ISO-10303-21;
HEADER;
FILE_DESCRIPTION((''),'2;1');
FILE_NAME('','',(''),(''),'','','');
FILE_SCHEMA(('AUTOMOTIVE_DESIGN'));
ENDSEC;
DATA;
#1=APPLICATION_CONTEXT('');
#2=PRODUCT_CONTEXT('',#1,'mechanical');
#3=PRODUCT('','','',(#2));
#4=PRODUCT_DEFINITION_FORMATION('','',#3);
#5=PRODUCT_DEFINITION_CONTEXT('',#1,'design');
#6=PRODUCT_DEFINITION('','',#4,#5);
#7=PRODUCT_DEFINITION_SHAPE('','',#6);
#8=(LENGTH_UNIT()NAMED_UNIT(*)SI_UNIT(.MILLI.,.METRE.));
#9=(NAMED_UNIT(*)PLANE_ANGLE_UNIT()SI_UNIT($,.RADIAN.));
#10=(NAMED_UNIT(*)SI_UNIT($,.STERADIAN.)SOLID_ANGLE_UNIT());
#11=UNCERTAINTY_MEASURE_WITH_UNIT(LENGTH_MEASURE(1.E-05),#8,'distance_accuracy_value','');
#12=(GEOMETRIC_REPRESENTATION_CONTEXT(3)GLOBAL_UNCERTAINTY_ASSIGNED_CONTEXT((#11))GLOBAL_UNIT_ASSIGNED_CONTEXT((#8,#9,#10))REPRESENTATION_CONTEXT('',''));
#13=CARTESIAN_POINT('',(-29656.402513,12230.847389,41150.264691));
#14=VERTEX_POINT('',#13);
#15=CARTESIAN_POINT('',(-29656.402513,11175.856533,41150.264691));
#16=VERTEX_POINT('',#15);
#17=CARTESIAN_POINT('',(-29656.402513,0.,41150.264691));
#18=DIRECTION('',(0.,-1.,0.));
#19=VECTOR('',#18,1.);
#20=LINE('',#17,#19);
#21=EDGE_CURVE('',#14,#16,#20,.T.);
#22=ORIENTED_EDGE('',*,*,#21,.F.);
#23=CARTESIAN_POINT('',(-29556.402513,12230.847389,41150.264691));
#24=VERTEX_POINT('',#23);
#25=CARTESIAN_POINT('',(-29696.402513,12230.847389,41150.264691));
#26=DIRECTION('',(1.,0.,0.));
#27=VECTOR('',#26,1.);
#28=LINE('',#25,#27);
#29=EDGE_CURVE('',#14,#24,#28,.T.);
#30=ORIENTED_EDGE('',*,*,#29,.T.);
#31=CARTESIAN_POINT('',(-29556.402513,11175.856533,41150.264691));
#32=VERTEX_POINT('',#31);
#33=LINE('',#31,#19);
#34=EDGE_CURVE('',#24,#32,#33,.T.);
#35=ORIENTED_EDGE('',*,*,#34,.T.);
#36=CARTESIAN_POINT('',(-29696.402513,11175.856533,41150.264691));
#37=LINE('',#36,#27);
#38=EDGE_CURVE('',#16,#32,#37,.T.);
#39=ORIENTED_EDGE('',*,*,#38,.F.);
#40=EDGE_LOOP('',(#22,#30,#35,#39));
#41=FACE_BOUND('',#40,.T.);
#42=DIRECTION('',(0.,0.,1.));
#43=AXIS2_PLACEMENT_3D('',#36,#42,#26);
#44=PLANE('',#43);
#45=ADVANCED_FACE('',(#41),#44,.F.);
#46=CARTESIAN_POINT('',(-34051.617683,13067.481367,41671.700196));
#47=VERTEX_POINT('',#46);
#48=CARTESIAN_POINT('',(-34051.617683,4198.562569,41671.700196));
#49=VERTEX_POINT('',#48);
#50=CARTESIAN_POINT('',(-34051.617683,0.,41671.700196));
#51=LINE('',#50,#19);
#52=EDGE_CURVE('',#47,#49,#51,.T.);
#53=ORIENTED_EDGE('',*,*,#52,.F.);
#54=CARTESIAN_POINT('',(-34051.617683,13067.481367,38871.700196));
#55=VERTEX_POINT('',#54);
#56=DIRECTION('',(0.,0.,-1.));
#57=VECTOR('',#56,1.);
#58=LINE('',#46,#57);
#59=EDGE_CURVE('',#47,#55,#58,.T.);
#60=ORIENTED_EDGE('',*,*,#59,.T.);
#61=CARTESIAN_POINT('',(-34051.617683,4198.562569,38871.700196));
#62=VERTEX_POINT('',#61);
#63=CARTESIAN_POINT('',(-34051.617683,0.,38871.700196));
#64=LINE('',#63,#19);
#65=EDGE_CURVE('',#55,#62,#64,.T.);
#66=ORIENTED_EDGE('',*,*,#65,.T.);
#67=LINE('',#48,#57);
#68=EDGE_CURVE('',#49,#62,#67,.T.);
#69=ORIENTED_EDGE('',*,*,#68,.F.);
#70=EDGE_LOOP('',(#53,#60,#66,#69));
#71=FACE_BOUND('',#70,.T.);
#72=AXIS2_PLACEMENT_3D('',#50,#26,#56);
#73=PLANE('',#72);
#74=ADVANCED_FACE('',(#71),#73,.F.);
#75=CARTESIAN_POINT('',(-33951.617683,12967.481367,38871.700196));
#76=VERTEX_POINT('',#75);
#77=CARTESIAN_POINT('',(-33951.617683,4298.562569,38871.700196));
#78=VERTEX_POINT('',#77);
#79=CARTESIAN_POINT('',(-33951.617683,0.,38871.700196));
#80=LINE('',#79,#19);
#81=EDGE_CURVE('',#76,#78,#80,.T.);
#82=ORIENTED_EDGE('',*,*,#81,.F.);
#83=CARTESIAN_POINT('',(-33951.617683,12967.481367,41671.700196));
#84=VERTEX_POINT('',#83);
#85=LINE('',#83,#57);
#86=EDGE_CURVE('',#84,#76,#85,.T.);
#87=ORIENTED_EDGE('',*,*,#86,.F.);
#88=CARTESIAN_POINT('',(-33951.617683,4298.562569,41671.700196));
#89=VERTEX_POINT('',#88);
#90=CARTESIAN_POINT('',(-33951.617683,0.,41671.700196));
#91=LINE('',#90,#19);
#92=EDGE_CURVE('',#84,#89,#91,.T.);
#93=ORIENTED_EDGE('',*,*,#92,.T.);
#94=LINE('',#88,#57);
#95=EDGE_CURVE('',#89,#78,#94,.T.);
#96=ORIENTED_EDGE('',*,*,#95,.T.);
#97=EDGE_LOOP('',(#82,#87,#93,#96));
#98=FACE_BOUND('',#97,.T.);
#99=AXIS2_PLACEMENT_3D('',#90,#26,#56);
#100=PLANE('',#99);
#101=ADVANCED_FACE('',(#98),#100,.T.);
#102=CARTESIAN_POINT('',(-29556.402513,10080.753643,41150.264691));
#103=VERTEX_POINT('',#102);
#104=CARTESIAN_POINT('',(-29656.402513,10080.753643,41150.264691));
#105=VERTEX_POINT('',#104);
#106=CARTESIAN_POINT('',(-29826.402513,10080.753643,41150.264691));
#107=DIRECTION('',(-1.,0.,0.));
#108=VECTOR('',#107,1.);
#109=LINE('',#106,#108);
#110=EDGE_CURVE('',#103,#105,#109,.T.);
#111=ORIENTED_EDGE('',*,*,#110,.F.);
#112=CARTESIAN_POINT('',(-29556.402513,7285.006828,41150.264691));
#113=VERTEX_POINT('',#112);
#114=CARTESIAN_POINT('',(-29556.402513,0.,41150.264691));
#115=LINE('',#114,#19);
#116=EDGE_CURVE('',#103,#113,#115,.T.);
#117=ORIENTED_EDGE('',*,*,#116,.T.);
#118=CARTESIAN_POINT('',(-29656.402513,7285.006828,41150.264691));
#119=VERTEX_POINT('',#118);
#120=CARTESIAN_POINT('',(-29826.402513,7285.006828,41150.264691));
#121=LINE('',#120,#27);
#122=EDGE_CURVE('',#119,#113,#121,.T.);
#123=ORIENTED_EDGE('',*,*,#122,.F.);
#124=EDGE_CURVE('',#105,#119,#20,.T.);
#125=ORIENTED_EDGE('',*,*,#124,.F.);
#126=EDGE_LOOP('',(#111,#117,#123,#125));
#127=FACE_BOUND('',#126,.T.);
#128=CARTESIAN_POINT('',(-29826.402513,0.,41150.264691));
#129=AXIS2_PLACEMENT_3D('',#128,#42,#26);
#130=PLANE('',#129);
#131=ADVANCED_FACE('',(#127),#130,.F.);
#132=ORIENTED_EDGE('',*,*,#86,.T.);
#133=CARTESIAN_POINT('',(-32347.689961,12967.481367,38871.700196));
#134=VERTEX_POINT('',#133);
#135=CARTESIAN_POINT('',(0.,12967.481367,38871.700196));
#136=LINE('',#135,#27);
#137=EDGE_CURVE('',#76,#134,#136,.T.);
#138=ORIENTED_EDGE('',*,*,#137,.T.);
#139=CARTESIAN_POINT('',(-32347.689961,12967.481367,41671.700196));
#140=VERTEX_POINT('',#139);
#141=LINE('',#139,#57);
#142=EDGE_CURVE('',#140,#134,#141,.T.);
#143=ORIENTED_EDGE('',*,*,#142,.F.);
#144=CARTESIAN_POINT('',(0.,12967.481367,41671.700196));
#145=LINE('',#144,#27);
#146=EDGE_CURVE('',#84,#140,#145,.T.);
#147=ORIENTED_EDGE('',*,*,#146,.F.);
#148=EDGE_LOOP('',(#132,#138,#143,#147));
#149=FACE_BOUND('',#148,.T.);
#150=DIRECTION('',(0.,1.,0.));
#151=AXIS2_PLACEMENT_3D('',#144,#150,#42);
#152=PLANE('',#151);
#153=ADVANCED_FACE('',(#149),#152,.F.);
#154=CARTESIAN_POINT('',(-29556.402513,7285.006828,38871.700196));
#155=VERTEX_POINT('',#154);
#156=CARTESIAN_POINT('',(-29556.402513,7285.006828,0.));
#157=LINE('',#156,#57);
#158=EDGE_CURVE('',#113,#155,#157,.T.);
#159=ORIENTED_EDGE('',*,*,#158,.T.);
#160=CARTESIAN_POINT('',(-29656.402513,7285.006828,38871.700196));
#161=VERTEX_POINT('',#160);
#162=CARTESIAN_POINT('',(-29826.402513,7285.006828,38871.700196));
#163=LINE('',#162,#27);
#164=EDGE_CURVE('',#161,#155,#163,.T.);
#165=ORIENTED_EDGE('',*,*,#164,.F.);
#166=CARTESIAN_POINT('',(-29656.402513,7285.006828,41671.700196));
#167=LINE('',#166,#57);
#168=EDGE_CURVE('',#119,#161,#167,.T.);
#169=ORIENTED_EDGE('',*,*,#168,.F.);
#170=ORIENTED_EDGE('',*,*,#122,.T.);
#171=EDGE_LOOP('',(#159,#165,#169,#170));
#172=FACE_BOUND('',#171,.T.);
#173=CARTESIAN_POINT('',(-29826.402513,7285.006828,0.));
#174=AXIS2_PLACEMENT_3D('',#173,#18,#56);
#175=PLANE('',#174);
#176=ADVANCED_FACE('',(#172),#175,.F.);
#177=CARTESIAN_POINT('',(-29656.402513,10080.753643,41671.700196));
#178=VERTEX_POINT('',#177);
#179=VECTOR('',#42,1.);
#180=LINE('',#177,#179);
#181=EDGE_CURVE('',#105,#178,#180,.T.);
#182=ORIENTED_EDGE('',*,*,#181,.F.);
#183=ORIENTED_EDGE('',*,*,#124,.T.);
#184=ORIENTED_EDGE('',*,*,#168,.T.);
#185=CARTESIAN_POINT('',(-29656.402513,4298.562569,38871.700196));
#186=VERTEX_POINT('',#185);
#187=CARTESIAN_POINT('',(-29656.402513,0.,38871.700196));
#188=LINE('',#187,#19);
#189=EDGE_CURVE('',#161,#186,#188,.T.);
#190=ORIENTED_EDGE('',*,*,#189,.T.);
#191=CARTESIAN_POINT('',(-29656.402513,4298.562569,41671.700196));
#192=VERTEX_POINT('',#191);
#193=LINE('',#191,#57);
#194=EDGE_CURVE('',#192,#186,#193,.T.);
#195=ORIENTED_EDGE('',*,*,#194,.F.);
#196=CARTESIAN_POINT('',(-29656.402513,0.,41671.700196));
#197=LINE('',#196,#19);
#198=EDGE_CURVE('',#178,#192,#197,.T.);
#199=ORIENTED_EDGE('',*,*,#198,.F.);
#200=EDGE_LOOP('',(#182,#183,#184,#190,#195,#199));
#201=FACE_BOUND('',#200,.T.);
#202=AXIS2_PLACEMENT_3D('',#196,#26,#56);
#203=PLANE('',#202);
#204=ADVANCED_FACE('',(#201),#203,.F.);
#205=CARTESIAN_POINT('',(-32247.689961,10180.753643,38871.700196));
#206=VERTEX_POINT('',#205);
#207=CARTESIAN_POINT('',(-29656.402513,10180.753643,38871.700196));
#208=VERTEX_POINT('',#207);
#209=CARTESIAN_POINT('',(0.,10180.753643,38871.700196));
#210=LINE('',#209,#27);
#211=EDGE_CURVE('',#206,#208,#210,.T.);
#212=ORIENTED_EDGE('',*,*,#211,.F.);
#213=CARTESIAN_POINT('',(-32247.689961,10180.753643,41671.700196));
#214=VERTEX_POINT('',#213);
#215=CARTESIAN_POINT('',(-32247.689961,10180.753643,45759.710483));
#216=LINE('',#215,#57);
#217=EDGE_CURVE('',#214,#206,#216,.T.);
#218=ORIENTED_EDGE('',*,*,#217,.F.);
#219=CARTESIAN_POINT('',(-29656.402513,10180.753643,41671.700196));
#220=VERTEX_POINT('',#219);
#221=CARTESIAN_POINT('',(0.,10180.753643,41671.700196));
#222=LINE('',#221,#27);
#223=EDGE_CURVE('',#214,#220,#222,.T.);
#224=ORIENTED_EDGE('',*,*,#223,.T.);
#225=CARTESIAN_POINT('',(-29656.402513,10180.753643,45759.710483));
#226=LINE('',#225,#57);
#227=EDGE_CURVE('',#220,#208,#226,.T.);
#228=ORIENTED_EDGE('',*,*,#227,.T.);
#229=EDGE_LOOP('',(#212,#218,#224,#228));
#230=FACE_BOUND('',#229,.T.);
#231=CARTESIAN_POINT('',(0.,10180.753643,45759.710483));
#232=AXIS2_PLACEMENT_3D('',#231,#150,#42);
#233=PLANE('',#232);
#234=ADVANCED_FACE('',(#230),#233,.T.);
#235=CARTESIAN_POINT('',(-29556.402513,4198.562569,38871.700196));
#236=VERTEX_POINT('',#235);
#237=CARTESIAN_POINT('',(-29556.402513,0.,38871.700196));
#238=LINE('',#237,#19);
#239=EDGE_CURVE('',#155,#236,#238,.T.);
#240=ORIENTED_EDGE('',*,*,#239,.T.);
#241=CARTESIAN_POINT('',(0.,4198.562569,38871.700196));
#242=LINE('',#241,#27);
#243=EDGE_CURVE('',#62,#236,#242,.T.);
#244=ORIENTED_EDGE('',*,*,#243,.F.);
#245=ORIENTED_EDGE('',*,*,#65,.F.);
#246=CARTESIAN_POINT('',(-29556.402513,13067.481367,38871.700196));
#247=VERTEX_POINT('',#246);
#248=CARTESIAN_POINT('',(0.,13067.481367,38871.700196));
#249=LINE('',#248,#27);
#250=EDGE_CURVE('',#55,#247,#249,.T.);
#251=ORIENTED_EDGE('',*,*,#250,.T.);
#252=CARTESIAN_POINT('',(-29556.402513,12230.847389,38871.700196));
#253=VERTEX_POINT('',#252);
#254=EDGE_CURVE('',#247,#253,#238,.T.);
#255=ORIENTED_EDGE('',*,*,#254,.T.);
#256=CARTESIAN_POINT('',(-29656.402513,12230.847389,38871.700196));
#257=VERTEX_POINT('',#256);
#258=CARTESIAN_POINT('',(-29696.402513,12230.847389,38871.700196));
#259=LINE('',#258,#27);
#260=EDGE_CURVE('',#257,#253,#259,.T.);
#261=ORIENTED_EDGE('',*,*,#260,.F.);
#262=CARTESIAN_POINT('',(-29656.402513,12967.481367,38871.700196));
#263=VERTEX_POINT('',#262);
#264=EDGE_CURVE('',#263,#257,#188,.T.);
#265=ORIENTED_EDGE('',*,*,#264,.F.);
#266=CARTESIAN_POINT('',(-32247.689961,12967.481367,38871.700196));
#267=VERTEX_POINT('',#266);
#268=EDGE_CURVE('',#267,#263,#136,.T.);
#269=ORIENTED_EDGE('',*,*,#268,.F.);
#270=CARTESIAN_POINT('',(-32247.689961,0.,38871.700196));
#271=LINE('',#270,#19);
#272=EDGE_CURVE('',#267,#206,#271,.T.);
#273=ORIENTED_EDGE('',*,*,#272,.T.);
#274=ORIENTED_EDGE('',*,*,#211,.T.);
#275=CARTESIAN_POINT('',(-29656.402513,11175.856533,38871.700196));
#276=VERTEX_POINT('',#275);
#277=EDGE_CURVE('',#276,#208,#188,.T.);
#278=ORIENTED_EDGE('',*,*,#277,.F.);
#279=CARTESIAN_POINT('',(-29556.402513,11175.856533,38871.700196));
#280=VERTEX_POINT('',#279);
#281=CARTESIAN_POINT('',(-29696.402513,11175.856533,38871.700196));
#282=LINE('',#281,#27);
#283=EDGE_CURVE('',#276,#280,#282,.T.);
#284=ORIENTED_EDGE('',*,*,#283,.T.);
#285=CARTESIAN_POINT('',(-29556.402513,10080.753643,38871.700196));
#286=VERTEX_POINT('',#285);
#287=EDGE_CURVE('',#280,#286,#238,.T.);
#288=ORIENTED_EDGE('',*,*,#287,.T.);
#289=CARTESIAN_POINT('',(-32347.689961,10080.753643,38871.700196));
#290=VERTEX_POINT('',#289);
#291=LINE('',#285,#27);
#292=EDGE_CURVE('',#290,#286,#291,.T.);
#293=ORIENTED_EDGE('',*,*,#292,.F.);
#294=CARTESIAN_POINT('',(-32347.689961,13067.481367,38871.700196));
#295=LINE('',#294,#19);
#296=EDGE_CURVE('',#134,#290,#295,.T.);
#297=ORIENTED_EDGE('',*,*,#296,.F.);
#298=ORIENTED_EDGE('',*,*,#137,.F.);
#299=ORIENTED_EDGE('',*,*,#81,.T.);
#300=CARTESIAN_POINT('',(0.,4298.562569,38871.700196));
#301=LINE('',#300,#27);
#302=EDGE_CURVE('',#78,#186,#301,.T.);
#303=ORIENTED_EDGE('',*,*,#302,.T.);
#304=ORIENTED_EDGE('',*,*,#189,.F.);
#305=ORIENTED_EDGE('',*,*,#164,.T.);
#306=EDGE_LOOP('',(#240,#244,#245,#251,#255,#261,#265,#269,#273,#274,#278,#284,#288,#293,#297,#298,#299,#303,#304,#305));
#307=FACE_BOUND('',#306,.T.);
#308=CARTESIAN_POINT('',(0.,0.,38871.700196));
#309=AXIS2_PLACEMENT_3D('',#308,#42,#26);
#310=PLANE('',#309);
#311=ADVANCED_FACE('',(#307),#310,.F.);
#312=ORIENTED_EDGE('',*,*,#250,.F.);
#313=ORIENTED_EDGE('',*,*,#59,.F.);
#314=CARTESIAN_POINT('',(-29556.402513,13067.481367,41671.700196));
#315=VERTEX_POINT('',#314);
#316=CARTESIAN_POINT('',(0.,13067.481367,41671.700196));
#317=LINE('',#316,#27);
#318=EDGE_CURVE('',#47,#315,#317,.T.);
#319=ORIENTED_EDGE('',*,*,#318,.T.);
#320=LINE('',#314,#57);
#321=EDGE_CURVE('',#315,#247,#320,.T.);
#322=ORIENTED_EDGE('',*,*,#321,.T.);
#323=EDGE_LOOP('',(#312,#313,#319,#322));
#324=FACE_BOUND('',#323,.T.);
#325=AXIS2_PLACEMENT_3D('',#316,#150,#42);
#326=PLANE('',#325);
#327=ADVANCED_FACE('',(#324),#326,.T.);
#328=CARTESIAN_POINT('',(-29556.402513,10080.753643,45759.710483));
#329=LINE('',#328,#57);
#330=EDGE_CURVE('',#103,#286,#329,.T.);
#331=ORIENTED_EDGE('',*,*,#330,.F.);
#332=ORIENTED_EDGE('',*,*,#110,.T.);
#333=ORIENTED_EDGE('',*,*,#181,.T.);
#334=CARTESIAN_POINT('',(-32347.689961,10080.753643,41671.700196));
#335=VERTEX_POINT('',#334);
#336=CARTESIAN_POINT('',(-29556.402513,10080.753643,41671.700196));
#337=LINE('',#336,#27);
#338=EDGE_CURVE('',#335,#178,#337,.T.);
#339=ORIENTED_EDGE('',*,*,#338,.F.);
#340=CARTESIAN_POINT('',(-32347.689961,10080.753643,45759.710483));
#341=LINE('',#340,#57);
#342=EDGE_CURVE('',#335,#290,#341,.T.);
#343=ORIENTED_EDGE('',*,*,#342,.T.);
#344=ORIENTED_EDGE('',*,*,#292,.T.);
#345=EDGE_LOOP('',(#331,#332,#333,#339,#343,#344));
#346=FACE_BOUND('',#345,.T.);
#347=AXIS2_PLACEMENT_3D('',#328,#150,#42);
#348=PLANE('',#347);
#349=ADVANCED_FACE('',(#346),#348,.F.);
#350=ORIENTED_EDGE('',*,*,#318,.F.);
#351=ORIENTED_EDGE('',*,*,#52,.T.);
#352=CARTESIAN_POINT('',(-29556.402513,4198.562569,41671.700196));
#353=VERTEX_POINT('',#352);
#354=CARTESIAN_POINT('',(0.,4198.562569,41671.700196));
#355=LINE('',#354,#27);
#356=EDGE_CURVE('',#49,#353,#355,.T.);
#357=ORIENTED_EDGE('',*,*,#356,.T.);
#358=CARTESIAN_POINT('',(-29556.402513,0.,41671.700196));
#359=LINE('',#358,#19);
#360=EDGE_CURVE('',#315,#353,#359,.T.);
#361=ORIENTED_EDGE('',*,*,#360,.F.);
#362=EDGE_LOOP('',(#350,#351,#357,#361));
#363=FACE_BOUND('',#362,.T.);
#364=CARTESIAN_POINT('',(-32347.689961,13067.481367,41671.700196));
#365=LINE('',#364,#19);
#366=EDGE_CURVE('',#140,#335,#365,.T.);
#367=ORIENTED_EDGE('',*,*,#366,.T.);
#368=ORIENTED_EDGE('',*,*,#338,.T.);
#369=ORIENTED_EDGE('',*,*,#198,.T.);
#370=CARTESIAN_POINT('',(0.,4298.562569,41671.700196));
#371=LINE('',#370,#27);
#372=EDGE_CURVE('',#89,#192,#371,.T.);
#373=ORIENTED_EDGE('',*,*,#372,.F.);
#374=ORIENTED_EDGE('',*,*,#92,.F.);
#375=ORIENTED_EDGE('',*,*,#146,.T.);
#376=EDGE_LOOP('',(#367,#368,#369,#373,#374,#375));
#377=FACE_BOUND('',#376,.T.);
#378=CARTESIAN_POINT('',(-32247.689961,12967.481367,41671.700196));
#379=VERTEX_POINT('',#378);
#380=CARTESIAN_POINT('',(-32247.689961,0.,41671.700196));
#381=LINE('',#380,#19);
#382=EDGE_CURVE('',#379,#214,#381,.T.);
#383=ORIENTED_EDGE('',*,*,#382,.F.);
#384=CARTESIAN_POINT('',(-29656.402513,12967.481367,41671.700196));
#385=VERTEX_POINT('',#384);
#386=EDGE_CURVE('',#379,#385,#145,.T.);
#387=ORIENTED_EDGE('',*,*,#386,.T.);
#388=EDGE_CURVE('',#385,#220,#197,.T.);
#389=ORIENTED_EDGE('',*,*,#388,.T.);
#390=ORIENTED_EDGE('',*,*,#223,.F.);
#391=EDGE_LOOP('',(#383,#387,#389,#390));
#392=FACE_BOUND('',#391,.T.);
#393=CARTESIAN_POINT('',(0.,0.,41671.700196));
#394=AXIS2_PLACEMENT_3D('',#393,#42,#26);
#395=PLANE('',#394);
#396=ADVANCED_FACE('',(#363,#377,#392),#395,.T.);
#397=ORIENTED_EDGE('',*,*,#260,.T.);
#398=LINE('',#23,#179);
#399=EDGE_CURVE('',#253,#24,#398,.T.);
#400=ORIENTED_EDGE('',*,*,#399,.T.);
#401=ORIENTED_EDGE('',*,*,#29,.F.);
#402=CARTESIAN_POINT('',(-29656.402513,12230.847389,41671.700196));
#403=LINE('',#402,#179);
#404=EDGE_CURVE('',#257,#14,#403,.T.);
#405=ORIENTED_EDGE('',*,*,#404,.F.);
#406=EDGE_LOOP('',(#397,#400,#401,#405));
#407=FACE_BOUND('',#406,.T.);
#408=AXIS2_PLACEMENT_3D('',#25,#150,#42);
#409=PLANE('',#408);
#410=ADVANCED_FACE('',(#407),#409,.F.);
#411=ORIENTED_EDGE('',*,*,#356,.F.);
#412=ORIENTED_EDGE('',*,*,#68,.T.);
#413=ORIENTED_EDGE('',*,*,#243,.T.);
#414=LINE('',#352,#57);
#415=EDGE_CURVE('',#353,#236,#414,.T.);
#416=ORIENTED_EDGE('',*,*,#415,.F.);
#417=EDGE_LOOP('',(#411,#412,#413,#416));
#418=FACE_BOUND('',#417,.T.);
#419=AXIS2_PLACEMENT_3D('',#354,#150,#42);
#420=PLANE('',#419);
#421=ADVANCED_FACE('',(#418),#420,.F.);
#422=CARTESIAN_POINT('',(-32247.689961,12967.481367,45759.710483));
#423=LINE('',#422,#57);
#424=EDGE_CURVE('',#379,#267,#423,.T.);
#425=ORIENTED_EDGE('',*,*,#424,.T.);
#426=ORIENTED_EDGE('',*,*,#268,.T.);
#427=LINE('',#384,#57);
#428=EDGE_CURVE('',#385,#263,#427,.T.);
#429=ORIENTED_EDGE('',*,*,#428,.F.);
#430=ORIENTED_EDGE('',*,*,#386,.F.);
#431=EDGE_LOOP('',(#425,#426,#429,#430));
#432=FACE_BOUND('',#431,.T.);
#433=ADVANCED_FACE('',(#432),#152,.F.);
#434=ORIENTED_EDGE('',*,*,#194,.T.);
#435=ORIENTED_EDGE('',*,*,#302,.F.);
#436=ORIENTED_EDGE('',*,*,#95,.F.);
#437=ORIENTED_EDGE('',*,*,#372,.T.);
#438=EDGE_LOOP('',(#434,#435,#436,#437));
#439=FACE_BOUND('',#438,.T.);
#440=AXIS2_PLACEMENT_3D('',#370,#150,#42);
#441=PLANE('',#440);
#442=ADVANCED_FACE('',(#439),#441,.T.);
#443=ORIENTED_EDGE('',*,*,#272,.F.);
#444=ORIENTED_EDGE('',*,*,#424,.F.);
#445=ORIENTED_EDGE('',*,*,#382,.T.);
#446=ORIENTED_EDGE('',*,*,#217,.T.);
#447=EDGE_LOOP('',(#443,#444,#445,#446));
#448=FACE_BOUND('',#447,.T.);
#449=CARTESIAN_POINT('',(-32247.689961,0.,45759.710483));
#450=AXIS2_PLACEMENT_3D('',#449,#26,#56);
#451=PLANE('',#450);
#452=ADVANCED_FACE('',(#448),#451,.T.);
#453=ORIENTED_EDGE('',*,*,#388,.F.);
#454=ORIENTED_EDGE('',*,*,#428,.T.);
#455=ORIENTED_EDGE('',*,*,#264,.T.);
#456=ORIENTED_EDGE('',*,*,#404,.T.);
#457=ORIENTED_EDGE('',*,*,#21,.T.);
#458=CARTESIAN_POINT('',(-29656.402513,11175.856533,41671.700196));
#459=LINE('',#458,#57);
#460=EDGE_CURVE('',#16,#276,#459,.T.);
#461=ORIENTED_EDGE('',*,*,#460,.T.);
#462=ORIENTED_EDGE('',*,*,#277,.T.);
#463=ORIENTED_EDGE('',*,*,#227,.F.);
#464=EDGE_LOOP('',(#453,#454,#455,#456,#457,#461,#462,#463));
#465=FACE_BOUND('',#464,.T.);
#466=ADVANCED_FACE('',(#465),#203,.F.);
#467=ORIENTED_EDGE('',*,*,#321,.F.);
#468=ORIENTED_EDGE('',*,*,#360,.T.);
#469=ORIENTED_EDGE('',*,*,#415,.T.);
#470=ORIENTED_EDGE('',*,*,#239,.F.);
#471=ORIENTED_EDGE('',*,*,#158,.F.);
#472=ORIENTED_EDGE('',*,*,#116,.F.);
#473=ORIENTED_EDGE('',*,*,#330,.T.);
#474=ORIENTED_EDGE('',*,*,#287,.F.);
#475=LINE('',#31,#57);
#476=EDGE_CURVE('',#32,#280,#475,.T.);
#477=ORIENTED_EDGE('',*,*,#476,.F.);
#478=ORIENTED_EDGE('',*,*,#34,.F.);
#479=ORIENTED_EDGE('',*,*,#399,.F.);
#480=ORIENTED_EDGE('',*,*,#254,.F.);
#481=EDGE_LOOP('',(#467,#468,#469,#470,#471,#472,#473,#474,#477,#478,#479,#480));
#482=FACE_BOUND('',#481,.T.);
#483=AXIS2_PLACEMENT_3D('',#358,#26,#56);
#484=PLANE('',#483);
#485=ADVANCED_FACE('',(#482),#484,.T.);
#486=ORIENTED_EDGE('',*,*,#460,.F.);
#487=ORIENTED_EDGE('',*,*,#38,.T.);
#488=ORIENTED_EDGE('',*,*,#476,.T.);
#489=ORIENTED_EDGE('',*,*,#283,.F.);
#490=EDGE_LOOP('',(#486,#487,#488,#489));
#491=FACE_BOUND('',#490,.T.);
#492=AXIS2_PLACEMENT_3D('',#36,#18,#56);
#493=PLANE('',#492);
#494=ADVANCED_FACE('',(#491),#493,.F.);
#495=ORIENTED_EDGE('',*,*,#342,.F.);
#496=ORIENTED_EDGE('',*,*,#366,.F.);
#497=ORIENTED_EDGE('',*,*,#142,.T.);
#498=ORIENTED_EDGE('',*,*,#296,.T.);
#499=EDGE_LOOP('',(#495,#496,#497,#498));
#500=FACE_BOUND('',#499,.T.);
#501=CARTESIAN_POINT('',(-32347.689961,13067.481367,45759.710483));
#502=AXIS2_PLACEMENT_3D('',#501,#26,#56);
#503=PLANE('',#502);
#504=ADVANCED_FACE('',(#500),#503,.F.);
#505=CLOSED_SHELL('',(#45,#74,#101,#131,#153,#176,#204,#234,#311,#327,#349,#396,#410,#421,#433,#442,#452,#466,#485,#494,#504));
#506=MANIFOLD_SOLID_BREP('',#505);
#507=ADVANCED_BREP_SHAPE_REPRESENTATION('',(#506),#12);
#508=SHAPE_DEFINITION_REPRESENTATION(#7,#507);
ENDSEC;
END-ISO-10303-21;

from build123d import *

# Parameters (mm, degrees)
EXTRUDE_THIN1_OUTLINE_W   = 4495.215169973
EXTRUDE_THIN1_OUTLINE_H   = 8868.918797099
EXTRUDE_THIN1_OUTLINE_W_2 = 4295.215169973
EXTRUDE_THIN1_OUTLINE_H_2 = 8668.918797099
EXTRUDE_THIN1_DEPTH       = 2800
SKETCH2_W                 = 2278.564495204
SKETCH2_H                 = 3084.203300048
SKETCH2_H_2               = 1183.861490667
CUT_EXTRUDE1_DEPTH        = 270
SKETCH3_W                 = 2791.287447335
SKETCH3_H                 = 2986.727723293
SKETCH3_W_2               = 2591.287447335
SKETCH3_H_2               = 2786.727723293
EXTRUDE_THIN2_DEPTH       = 2800
SKETCH4_W                 = 2278.564495204
SKETCH4_H                 = 1054.990856004
CUT_EXTRUDE2_DEPTH        = 140


# Read off the part's stored shape, not the designer's step: Extrude-Thin1
with BuildPart() as part:
    # Extrude-Thin1 outline → Extrude-Thin1 (new body)
    with BuildSketch(Plane.XY.offset(38871.700196057)):
        with Locations((-31804.010098304, 8633.021968037)):
            Rectangle(EXTRUDE_THIN1_OUTLINE_W, EXTRUDE_THIN1_OUTLINE_H)
        with Locations((-31804.010098304, 8633.021968037)):
            Rectangle(EXTRUDE_THIN1_OUTLINE_W_2, EXTRUDE_THIN1_OUTLINE_H_2, mode=Mode.SUBTRACT)
    extrude(amount=EXTRUDE_THIN1_DEPTH)

    # Sketch2 → Cut-Extrude1 (cut)
    with BuildSketch(Plane(origin=(-29556.402513318, 0, 0), x_dir=(0, 0, -1), z_dir=(1, 0, 0))):
        with Locations((-40010.982443659, 8827.108478048)):
            Rectangle(SKETCH2_W, SKETCH2_H)
        with Locations((-40010.982443659, 11948.084927174)):
            Rectangle(SKETCH2_W, SKETCH2_H_2)
    extrude(amount=-CUT_EXTRUDE1_DEPTH, mode=Mode.SUBTRACT)

    # Sketch3 → Extrude-Thin2 (add)
    with BuildSketch(Plane.XY.offset(38871.700196057)):
        with Locations((-30952.046236986, 11574.11750494)):
            Rectangle(SKETCH3_W, SKETCH3_H)
        with Locations((-30952.046236986, 11574.11750494)):
            Rectangle(SKETCH3_W_2, SKETCH3_H_2, mode=Mode.SUBTRACT)
    extrude(amount=EXTRUDE_THIN2_DEPTH)

    # Sketch4 → Cut-Extrude2 (cut)
    with BuildSketch(Plane(origin=(-29556.402513318, 0, 0), x_dir=(0, 0, -1), z_dir=(1, 0, 0))):
        with Locations((-40010.982443659, 11703.351961029)):
            Rectangle(SKETCH4_W, SKETCH4_H)
    extrude(amount=-CUT_EXTRUDE2_DEPTH, mode=Mode.SUBTRACT)


solid = part.part
